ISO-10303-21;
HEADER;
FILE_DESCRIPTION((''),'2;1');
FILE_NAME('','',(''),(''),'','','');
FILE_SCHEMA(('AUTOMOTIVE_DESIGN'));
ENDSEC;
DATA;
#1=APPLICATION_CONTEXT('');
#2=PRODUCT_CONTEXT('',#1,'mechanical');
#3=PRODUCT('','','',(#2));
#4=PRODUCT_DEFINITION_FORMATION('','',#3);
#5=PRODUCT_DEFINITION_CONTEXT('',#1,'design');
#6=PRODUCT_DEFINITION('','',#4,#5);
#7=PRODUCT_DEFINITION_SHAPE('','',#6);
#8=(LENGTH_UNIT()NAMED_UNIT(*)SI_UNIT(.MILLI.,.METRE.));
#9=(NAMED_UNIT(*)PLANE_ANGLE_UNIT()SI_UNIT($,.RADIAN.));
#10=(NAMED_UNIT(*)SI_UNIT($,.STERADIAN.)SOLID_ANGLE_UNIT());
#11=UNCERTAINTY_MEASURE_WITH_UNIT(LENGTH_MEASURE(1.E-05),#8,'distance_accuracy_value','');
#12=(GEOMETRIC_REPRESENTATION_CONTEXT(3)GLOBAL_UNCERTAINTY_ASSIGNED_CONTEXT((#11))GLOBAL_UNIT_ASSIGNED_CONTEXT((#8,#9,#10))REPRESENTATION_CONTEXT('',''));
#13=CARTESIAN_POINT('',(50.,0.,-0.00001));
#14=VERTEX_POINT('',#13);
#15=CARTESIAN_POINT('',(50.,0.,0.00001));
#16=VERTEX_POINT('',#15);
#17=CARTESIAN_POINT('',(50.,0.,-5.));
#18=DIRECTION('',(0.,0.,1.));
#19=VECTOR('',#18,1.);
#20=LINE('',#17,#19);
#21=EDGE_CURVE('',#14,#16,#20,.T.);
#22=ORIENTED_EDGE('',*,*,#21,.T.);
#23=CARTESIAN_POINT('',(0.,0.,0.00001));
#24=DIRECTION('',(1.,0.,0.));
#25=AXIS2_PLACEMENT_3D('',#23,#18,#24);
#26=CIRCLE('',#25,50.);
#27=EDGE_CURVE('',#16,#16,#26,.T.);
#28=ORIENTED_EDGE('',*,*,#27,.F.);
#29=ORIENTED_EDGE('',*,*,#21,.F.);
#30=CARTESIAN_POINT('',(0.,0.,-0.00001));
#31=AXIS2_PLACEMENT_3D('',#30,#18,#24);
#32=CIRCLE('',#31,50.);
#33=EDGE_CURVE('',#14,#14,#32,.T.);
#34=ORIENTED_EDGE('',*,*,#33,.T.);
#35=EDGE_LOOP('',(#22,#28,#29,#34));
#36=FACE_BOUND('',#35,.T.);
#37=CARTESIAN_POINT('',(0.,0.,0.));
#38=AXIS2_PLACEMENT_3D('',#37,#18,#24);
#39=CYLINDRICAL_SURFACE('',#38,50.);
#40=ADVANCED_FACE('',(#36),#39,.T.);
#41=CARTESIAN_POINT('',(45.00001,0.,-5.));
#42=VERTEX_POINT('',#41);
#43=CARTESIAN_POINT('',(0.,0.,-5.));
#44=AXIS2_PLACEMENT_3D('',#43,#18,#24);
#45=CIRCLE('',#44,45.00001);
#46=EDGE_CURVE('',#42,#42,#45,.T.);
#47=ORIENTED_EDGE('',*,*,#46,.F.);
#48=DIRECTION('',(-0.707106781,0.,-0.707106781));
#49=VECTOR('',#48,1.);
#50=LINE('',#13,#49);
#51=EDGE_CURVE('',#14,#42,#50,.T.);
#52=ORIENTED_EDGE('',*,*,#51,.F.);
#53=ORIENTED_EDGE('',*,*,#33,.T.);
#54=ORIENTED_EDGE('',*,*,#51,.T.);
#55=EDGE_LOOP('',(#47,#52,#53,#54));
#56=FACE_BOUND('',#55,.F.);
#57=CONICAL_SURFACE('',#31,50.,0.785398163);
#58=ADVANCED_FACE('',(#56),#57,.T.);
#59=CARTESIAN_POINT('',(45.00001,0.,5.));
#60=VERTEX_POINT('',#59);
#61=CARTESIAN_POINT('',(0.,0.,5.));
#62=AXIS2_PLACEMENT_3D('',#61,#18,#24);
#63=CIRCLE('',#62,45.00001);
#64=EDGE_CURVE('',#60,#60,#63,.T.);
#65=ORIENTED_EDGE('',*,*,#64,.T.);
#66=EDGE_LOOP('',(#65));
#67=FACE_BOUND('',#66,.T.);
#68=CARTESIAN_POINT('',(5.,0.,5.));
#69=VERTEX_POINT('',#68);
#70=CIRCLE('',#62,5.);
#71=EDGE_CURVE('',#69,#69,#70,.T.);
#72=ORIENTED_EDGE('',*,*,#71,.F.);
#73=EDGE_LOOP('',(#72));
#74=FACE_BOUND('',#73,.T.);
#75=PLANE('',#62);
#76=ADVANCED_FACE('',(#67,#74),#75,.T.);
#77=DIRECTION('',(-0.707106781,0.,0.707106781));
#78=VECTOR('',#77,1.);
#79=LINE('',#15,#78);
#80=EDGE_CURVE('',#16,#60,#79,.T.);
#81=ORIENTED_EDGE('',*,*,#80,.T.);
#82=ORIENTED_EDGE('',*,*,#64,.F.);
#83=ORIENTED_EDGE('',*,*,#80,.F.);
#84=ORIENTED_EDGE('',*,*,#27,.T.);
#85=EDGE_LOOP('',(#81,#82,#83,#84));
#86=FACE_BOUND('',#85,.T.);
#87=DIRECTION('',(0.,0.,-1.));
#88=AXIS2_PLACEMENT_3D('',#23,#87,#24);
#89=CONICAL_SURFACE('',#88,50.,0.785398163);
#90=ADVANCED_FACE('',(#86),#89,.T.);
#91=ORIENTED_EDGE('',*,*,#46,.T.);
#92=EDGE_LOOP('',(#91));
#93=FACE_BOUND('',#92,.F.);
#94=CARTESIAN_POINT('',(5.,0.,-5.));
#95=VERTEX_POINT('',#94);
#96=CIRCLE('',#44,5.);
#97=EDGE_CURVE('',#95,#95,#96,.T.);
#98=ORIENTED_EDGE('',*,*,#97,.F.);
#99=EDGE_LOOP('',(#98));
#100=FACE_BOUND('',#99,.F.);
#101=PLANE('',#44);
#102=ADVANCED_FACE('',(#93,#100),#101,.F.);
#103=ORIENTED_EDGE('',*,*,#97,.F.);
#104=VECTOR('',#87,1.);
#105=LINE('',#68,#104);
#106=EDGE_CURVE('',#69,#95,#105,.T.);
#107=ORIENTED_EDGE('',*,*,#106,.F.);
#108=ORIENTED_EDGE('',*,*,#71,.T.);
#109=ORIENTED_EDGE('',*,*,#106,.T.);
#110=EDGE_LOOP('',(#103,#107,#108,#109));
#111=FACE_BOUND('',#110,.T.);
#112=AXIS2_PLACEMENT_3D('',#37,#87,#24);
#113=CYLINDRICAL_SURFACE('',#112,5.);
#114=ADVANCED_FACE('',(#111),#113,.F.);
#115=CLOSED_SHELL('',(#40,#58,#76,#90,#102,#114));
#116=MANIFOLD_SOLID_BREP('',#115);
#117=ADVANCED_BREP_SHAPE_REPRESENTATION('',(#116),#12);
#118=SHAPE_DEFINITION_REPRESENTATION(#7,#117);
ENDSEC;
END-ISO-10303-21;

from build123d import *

# Parameters (mm, degrees)
F0_R     = 50
F0_R_2   = 40.0681224509
F0_R_3   = 5
F1_DEPTH = 5
F2_SIZE2 = 4.99999
F2_SIZE  = 4.99999


# Not quite as in the source:
# - a fillet or chamfer is up to 0.001 mm smaller than in the source, because OpenCascade refuses the exact size


with BuildPart() as f1:
    # F0 (on Top) → F1 (new body, symmetric)
    with BuildSketch(Plane.XY):
        Circle(F0_R)
        Circle(F0_R_2, mode=Mode.SUBTRACT)
        Circle(F0_R_2)
        Circle(F0_R_3, mode=Mode.SUBTRACT)
    extrude(amount=F1_DEPTH, both=True)

    # F2 (size 5 and 5 in the source; OpenCascade refuses exactly that, so slightly less here)
    f2_edges = [f1.edges().sort_by_distance(p)[0] for p in [
        (-50, 0, 5),
        (-50, 0, -5),
    ]]
    chamfer(f2_edges, length=F2_SIZE, length2=F2_SIZE2)


solid = f1.part
